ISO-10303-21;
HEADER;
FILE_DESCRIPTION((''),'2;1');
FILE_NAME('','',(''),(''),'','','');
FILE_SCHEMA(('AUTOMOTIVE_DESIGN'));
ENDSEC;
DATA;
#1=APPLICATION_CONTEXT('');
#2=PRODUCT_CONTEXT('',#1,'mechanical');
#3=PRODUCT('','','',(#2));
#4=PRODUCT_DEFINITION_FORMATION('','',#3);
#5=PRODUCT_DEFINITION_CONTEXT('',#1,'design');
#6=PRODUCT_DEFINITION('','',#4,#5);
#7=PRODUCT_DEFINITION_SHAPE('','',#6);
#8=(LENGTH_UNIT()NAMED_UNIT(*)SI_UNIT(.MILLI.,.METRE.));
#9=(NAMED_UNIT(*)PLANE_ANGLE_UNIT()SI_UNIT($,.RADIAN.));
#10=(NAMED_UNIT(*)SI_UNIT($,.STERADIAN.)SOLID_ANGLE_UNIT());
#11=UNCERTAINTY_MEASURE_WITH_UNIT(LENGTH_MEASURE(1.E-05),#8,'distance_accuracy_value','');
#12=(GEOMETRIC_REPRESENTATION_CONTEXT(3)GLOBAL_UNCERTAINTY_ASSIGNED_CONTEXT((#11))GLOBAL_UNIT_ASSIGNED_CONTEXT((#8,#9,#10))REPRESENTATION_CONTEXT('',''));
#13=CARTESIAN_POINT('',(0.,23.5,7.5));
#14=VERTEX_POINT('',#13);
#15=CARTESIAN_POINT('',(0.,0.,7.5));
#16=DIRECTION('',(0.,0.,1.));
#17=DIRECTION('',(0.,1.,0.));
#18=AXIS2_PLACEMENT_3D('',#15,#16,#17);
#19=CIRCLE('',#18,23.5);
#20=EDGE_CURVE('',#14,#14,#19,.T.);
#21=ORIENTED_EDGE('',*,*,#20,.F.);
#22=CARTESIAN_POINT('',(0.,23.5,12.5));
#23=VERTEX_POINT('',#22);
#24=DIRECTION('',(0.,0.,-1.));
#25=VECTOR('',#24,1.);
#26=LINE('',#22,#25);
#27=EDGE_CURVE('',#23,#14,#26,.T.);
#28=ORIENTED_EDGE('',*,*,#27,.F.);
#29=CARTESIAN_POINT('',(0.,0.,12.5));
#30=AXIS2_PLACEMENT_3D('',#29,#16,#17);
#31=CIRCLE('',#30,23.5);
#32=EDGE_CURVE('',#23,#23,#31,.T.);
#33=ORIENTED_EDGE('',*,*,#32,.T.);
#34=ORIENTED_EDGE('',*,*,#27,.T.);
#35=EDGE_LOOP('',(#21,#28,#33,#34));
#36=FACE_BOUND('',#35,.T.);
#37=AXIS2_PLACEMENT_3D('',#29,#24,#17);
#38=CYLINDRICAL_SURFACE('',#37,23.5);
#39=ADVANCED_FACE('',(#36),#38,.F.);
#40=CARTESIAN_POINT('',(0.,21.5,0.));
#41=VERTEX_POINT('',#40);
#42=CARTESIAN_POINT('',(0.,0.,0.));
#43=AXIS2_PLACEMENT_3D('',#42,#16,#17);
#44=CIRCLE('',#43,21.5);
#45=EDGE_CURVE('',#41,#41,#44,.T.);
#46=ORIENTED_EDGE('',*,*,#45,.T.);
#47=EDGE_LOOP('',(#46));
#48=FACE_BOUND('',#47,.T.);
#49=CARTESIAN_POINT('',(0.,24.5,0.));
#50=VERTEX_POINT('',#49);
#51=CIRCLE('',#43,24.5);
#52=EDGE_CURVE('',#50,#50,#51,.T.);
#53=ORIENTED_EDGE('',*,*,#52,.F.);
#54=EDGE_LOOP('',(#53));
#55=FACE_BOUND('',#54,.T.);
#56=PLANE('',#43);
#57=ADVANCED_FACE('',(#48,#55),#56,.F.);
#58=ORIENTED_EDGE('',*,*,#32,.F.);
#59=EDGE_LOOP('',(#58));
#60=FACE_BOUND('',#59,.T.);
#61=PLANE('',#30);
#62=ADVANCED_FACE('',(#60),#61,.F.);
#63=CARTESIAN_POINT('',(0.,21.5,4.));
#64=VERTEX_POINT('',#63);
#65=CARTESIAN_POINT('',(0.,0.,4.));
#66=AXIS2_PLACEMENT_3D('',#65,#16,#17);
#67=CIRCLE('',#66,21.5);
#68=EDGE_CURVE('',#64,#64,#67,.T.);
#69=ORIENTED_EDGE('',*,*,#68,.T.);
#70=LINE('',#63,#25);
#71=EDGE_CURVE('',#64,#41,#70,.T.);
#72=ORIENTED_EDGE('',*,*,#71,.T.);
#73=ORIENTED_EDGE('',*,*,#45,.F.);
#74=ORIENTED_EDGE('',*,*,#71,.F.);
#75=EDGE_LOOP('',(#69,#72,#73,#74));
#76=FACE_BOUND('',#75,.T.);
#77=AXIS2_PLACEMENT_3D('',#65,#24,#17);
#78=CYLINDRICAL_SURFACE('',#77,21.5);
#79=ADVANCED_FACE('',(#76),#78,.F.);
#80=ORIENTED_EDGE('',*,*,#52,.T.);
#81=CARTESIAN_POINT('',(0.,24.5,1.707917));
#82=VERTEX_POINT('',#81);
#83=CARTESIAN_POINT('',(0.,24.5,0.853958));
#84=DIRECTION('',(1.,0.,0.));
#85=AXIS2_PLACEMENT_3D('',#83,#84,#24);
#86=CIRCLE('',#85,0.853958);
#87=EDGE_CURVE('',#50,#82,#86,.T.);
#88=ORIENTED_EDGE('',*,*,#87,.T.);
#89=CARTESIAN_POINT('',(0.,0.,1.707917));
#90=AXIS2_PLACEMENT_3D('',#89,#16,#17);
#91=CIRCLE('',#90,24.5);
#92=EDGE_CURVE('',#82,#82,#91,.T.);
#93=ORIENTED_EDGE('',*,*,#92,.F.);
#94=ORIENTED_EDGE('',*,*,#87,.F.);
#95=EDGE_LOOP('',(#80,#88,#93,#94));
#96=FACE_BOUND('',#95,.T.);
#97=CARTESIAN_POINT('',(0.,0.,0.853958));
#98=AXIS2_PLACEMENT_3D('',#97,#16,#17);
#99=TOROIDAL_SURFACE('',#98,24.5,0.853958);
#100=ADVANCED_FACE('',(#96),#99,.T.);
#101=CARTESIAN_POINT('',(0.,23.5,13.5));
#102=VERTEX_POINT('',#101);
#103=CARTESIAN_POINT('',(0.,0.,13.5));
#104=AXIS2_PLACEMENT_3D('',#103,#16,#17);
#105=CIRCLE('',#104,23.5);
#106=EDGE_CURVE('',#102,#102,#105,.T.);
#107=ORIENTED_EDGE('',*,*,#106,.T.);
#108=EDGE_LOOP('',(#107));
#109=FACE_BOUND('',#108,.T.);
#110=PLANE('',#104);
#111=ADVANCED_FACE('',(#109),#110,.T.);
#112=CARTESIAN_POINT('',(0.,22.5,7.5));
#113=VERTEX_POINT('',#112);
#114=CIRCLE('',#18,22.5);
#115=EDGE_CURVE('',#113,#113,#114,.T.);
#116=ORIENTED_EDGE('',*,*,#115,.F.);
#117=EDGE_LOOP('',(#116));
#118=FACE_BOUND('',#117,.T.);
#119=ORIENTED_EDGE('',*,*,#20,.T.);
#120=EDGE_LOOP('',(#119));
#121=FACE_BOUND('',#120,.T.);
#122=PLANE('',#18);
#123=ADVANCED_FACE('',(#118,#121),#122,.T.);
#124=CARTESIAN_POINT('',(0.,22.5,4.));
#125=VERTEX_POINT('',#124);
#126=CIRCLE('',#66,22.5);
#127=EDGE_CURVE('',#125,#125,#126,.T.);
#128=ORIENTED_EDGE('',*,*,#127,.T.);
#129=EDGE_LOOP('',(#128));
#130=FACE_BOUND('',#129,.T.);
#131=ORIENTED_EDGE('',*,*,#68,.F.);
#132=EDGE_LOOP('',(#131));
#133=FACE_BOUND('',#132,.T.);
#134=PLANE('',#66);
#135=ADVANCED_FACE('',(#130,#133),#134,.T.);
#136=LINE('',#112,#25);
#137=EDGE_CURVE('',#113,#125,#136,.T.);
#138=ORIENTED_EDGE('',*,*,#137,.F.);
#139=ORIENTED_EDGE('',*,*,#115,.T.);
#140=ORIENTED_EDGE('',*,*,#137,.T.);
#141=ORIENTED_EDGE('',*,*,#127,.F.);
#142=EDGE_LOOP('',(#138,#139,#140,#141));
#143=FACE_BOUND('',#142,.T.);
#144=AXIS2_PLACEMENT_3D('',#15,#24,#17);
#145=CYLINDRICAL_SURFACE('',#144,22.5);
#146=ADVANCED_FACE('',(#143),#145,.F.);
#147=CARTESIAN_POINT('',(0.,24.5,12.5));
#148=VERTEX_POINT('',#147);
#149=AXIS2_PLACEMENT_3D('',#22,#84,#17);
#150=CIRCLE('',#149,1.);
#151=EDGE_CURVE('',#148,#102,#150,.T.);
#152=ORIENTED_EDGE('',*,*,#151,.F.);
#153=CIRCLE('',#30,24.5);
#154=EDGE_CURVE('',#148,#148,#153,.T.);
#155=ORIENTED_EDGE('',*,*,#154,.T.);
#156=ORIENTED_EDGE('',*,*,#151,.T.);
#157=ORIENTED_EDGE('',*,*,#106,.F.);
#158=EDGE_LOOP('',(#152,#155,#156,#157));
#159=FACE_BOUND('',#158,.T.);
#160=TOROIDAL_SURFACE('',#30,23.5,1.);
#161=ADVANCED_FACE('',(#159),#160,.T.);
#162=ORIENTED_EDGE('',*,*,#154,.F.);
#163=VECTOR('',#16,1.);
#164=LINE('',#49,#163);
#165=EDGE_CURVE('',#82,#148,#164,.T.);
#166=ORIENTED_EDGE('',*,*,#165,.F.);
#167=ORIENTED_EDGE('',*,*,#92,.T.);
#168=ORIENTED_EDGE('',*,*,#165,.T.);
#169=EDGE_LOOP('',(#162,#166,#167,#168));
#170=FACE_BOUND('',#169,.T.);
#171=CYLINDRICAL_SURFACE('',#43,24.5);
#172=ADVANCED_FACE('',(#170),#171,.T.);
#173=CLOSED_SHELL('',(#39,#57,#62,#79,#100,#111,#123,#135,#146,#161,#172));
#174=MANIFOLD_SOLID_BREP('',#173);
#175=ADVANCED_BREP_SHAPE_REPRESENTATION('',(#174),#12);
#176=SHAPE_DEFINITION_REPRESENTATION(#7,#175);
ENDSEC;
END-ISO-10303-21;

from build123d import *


# Not quite as in the source:
# - a feature names something its author has since deleted; it is built from what else it names


with BuildPart() as f1:
    # F0 (on Right) → F1 (revolve)
    with BuildSketch(Plane.YZ):
        with BuildLine():
            Line((21.5, 4), (21.5, 0))
            Line((21.5, 0), (24.5, 0))
            Line((24.5, 0), (24.5, 1.7079167301))
            Line((24.5, 1.7079167301), (24.5, 12.5))
            ThreePointArc((24.5, 12.5), (24.2071067812, 13.2071067812), (23.5, 13.5))
            Line((23.5, 13.5), (0, 13.5))
            Line((0, 13.5), (0, 12.5))
            Line((0, 12.5), (22.5, 12.5))
            Line((22.5, 12.5), (23.5, 12.5))
            Line((23.5, 12.5), (23.5, 7.5))
            Line((23.5, 7.5), (22.5, 7.5))
            Line((22.5, 7.5), (22.5, 4))
            Line((22.5, 4), (21.5, 4))
        make_face()
        with BuildLine():
            Line((24.5, 1.7079167301), (24.5, 0))
            ThreePointArc((24.5, 0), (25.353958365, 0.853958365), (24.5, 1.7079167301))
        make_face()
    revolve(axis=Axis((0, 0, 6.75), (0, 0, 1)))


solid = f1.part
